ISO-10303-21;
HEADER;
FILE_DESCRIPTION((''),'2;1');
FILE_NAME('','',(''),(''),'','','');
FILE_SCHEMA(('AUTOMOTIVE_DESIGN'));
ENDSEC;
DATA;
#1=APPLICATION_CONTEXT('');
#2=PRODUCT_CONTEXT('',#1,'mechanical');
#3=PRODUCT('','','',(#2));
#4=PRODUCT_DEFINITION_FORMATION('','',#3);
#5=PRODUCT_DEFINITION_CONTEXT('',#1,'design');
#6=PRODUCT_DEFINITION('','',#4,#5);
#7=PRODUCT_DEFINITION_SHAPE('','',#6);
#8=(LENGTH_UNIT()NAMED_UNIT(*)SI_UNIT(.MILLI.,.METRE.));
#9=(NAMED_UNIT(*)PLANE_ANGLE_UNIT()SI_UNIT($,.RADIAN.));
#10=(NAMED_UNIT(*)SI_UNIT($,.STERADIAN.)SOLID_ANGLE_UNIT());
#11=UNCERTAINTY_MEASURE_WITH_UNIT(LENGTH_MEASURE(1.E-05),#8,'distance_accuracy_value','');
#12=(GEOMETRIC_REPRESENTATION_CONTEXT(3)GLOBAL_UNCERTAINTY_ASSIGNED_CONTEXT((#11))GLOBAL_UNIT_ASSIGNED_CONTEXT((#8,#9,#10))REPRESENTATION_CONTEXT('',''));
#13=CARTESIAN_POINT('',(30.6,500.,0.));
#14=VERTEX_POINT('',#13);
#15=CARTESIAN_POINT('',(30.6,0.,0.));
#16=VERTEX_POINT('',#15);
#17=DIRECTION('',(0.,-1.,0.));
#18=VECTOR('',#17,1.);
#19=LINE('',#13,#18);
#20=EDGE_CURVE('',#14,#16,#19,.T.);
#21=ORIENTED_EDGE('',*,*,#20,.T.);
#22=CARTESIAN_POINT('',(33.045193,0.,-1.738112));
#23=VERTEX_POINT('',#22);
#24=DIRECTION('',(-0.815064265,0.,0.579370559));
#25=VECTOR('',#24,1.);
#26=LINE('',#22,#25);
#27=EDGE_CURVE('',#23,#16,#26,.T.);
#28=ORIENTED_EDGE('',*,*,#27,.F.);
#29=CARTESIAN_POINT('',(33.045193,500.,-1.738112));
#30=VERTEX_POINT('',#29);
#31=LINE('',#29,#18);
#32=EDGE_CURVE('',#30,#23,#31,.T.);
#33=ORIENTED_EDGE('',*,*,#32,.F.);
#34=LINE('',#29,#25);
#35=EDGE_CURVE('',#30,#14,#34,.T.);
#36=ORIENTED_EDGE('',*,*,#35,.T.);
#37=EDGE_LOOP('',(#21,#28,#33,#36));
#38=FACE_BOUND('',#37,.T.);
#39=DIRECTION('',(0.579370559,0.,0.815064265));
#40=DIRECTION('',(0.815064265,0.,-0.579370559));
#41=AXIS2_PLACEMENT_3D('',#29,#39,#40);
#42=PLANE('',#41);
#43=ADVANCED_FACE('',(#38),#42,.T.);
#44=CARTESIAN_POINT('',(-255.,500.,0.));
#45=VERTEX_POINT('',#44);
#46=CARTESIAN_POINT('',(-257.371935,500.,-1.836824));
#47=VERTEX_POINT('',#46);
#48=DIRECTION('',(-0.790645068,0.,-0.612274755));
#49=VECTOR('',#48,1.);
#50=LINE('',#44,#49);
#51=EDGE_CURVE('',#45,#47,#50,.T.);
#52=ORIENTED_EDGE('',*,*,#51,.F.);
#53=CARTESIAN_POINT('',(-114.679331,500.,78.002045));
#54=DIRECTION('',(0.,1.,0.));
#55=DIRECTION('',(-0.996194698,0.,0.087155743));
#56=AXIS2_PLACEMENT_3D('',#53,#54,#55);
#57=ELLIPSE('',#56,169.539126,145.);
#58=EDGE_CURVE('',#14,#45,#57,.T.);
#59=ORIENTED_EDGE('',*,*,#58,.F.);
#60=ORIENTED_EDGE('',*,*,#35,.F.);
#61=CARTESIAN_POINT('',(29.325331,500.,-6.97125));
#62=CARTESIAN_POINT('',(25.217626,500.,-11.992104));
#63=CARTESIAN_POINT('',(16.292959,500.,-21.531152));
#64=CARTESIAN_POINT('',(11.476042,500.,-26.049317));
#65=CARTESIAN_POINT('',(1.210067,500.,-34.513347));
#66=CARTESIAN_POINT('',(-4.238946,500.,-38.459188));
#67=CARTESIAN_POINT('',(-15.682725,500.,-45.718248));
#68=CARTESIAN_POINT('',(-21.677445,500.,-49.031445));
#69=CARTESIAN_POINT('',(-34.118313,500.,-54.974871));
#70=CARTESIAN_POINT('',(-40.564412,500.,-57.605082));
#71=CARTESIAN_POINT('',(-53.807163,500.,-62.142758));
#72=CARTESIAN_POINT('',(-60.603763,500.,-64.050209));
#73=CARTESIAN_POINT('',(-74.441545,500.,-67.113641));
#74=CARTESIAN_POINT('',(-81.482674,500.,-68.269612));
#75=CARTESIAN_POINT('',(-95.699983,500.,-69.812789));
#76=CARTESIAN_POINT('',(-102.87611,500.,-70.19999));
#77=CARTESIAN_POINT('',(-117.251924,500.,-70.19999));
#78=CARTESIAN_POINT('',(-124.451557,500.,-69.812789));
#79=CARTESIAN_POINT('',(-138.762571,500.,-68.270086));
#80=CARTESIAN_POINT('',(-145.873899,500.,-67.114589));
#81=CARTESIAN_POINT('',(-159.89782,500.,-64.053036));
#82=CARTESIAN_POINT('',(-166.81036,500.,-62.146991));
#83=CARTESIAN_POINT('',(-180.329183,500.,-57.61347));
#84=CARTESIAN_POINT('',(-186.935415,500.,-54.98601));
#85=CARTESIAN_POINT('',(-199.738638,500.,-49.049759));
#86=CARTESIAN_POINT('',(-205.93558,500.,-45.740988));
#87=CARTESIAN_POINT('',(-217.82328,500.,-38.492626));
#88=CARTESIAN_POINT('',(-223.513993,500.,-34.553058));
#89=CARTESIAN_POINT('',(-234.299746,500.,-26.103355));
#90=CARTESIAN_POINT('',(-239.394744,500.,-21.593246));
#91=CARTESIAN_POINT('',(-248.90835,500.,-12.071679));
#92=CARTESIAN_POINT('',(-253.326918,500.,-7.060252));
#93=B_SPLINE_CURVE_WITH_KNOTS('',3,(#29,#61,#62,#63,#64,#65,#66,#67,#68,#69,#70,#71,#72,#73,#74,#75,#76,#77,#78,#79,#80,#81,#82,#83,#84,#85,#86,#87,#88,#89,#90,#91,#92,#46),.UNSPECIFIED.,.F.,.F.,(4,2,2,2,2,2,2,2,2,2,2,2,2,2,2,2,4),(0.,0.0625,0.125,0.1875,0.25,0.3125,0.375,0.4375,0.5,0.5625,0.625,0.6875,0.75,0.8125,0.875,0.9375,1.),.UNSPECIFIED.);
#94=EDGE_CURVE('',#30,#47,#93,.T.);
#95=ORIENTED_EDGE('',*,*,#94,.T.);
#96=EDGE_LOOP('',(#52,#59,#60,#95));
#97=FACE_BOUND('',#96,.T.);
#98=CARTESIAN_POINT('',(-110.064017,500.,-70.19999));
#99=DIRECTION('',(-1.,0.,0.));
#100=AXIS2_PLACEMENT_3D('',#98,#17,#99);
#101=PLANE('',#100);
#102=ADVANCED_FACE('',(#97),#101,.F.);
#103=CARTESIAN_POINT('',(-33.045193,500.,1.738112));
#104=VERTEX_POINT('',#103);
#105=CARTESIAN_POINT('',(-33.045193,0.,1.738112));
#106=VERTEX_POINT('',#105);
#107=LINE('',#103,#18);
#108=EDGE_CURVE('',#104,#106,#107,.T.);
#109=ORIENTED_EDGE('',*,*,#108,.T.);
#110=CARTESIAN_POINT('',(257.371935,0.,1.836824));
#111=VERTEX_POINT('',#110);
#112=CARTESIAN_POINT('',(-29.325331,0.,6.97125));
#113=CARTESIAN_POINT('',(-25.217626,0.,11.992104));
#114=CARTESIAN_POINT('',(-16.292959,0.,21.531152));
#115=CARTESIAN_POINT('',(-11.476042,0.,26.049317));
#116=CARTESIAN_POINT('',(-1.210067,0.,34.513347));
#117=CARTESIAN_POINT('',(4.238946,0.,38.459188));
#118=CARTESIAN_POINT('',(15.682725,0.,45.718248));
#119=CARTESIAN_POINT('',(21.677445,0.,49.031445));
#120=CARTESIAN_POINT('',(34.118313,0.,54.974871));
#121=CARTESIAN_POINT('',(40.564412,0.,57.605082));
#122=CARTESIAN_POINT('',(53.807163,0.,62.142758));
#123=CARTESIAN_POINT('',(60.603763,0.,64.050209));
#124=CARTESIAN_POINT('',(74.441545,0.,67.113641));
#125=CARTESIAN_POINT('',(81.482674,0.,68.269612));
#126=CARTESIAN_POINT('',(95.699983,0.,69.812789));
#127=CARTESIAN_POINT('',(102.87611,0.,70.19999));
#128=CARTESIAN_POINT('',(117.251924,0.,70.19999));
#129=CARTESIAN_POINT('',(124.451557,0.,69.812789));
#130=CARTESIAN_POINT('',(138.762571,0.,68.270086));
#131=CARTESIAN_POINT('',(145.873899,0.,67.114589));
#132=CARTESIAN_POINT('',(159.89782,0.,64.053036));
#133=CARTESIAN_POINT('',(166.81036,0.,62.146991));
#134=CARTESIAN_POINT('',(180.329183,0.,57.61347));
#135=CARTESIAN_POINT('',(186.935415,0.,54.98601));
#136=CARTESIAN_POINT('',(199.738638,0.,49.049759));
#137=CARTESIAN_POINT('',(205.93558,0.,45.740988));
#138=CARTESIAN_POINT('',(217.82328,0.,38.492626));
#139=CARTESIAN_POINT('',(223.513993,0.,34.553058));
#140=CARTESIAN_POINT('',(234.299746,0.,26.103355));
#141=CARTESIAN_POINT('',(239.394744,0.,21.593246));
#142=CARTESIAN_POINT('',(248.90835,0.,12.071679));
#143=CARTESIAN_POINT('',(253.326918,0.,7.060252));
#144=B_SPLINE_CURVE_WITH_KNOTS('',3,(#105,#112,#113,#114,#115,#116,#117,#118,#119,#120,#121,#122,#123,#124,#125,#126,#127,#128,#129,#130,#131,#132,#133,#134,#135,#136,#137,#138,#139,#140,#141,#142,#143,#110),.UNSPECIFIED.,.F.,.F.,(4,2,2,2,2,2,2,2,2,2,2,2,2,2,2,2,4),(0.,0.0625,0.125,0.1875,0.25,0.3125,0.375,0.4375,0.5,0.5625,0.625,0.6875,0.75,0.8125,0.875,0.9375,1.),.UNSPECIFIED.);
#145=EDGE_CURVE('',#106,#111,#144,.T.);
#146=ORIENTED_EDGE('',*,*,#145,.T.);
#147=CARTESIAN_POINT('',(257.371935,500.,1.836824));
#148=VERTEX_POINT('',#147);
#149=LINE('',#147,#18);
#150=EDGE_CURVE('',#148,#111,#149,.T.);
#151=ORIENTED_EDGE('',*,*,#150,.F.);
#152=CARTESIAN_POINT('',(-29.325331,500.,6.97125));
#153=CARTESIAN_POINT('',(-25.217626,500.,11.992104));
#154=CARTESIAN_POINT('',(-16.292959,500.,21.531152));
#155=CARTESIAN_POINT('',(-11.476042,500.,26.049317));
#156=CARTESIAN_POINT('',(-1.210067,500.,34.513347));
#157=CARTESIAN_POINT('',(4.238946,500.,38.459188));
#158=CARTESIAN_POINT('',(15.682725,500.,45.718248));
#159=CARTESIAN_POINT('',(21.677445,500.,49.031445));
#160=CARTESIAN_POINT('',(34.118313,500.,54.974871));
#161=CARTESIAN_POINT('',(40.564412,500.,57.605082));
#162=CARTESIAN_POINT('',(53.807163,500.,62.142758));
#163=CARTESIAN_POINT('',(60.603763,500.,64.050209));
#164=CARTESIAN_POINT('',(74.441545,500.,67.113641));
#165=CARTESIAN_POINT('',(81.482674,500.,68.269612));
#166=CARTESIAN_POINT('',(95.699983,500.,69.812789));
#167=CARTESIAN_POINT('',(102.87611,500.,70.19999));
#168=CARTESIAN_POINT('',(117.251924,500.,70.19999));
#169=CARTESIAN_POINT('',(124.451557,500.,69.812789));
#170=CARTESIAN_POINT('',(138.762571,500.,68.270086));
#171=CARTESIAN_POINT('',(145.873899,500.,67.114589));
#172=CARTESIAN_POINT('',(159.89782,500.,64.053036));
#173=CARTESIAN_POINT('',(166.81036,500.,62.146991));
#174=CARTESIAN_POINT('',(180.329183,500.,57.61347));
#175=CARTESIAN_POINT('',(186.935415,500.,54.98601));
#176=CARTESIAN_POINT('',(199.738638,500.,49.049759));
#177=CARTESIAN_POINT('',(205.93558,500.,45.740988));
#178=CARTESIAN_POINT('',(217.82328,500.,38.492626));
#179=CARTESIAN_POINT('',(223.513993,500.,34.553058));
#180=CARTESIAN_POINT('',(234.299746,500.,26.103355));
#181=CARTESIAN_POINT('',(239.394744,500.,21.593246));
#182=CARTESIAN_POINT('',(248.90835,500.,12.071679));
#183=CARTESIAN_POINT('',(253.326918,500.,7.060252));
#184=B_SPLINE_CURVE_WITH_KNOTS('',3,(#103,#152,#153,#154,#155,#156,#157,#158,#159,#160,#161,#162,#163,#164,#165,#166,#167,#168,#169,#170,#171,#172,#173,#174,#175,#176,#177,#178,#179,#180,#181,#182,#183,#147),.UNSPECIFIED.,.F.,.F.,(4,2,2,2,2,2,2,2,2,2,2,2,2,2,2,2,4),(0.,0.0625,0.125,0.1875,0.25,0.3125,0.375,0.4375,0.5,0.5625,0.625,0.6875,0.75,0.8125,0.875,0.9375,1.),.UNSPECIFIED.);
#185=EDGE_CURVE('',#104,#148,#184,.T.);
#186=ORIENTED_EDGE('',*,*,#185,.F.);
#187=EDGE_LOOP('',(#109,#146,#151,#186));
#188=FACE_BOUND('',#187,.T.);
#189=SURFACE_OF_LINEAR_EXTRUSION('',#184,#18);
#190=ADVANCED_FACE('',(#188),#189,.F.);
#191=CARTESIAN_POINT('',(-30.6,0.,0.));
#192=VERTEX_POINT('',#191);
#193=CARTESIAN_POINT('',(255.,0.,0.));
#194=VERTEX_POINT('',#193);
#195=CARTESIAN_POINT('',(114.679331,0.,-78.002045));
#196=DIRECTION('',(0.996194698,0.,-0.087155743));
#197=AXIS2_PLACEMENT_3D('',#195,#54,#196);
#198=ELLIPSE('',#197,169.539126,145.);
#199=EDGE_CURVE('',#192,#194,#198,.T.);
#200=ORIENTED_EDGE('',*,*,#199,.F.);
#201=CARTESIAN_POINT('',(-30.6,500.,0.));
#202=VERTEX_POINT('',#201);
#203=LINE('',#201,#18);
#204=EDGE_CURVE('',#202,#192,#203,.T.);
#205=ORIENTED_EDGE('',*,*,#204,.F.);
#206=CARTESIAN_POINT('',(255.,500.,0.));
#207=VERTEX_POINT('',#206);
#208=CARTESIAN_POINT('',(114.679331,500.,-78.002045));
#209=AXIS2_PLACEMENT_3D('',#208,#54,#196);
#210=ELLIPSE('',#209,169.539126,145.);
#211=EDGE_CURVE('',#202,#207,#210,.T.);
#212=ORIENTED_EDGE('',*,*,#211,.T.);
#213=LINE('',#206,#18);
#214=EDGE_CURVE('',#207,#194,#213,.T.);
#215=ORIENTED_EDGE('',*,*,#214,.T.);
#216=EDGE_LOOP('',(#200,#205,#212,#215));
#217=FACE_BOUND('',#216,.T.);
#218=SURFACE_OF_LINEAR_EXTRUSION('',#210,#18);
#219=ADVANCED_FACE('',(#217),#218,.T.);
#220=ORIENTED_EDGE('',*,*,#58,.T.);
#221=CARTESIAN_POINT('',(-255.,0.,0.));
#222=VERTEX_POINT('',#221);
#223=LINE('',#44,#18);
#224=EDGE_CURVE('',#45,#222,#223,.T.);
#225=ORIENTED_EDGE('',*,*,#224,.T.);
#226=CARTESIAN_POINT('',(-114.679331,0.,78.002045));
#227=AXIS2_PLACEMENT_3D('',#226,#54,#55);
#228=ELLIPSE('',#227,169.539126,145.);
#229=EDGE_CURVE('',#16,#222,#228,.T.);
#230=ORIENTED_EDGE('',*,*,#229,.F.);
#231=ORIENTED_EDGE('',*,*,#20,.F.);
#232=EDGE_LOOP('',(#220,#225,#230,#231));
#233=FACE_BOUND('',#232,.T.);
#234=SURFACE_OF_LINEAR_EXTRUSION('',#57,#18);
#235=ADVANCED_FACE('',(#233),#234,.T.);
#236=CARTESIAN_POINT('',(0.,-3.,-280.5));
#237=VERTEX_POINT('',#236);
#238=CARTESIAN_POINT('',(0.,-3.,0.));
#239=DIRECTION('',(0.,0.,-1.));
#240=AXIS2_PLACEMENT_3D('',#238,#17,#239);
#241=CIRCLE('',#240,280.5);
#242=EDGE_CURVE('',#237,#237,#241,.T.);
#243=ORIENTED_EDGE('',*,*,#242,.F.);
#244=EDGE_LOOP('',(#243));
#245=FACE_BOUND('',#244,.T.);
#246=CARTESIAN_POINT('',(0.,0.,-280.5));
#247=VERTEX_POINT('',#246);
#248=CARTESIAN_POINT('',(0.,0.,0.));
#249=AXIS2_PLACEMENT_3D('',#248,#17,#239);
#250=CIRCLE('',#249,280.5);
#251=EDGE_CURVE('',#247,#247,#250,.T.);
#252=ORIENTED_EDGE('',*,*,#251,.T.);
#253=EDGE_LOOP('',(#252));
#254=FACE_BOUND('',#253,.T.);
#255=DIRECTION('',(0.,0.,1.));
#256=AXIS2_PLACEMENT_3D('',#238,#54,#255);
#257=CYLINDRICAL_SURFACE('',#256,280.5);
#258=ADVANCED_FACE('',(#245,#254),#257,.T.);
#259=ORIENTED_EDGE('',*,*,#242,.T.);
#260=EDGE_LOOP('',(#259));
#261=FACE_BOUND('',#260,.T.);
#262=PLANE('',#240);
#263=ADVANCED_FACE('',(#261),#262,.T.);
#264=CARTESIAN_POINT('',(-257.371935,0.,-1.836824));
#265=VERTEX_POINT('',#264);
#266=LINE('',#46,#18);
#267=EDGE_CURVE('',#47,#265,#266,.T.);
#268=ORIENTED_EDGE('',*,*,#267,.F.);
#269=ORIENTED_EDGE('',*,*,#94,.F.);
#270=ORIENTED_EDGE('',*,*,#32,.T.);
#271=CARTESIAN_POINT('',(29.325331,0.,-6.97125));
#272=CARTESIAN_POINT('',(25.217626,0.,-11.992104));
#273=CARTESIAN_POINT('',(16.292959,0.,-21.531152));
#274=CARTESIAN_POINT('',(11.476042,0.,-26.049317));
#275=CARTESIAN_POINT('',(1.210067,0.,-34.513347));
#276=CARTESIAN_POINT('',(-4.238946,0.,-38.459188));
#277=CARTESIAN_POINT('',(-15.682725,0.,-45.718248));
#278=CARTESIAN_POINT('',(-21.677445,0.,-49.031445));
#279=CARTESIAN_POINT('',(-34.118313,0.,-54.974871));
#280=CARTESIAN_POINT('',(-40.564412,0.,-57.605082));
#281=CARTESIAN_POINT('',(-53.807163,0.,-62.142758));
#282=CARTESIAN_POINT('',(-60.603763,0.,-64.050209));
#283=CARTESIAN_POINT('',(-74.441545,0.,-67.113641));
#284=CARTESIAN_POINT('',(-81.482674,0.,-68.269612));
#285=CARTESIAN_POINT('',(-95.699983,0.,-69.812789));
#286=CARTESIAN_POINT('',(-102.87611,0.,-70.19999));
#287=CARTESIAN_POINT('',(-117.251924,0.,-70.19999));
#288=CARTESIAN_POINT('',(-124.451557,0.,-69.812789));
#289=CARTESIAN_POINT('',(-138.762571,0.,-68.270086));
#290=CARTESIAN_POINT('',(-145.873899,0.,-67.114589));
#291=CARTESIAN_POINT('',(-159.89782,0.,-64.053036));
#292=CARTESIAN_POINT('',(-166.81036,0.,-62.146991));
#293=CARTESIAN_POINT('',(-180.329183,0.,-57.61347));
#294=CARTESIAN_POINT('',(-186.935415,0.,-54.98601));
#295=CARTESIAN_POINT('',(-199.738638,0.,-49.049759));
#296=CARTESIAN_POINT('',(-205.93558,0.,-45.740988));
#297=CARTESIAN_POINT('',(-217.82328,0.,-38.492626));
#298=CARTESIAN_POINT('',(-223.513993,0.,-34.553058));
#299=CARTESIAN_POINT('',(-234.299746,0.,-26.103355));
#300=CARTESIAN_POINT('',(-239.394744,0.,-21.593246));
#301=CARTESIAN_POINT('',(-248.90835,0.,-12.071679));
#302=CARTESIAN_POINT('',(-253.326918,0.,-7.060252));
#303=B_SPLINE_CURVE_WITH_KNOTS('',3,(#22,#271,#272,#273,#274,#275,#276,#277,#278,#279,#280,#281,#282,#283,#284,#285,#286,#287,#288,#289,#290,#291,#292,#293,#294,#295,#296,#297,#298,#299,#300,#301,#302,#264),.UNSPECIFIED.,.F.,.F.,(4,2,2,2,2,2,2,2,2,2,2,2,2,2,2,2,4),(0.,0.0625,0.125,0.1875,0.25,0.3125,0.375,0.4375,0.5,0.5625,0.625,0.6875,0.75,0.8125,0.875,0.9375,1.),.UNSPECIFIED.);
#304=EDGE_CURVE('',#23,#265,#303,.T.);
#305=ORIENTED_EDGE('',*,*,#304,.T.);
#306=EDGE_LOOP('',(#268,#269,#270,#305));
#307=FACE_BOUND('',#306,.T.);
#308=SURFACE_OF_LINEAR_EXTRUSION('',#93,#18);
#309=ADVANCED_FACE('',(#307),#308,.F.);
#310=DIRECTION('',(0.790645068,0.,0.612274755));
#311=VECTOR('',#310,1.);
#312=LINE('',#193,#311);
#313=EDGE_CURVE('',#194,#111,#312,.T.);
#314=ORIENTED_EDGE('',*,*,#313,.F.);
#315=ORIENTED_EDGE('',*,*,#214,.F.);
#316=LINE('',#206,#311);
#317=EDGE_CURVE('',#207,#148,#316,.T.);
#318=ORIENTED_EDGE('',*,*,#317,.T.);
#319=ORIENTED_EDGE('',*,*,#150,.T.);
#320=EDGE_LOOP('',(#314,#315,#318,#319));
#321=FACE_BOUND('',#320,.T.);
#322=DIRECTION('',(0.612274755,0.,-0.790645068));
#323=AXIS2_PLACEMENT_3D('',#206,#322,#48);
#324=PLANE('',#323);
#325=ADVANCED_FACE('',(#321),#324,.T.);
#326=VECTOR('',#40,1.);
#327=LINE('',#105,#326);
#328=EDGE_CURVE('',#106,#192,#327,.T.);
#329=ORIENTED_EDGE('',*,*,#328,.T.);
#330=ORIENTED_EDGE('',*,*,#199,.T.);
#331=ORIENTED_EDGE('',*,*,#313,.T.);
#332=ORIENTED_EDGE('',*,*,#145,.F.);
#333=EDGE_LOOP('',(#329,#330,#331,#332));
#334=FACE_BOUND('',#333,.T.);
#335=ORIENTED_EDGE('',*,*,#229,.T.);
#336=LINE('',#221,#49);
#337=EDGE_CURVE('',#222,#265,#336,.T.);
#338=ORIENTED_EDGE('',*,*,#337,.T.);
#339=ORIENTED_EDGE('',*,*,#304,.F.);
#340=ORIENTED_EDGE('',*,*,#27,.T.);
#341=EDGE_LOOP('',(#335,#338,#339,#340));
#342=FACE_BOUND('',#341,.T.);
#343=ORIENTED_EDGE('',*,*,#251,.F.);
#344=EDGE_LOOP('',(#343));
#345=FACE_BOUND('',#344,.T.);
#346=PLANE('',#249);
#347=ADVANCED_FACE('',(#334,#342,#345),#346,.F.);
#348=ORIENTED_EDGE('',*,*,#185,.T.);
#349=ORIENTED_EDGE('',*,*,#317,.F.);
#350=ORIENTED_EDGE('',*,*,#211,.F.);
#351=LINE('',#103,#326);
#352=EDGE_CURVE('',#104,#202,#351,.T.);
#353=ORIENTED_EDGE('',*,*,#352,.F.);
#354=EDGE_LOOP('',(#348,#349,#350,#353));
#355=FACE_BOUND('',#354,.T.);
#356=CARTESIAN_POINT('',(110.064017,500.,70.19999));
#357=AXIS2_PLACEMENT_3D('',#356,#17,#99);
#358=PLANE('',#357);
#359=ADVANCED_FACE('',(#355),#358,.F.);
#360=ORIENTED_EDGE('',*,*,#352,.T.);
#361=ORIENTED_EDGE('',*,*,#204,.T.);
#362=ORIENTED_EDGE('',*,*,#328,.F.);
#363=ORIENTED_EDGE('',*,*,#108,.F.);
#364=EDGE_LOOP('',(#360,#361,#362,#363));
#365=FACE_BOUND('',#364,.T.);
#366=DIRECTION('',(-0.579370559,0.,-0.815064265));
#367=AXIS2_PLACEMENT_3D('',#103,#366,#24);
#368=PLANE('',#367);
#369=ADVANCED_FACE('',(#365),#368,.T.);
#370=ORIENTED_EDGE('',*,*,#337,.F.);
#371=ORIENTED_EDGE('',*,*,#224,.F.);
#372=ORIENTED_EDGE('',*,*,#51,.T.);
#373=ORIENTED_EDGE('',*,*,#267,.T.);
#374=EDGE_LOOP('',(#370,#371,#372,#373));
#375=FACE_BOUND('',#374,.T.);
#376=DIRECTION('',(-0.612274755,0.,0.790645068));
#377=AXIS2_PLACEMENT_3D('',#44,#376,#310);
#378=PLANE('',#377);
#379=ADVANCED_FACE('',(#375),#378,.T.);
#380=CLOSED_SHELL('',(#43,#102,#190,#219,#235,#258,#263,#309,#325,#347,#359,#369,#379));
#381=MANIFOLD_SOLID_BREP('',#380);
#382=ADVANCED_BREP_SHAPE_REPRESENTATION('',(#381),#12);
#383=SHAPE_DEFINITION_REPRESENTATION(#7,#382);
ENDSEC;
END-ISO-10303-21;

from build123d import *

# Parameters (mm, degrees)
EXTRUIR_L_MINA1_DEPTH      = 500
CROQUIS2_R                 = 280.5
SALIENTE_EXTRUIR8_DEPTH    = 3
S_LIDO_MOVER_COPIAR1_ANGLE = 90
S_LIDO_MOVER_COPIAR4_ANGLE = 30
S_LIDO_MOVER_COPIAR5_ANGLE = 60


# Read off the part's stored shape, not the designer's step: Extruir-Lámina1
with BuildPart() as part:
    # Extruir-Lámina1 outline → Extruir-Lámina1 (new body)
    with BuildSketch(Plane(origin=(0, 0, 0), x_dir=(1, 0, 0), z_dir=(0, 1, 0))):
        with BuildLine():
            Line((30.6, 0), (33.045192794, 1.738111676))
            add(Edge.make_bspline(
                [(33.045192794, 1.738111676), (29.325331418, 6.971249659), (25.217625759, 11.992104492), (16.292959006, 21.531152277), (11.476041906, 26.049316609), (1.210067227, 34.513346738), (-4.238946213, 38.459188481), (-15.682725139, 45.718247967), (-21.67744537, 49.03144478), (-34.118312716, 54.97487064), (-40.564412482, 57.605081709), (-53.807162636, 62.142757905), (-60.603763125, 64.050208568), (-74.441544914, 67.113640591), (-81.482673915, 68.269611786), (-95.699983428, 69.812788852), (-102.876109859, 70.199989547), (-117.251923935, 70.199989547), (-124.451556616, 69.812789113), (-138.762571325, 68.27008593), (-145.873898544, 67.114589032), (-159.897819572, 64.053035779), (-166.810359776, 62.146990717), (-180.329183361, 57.61346979), (-186.935415282, 54.986010224), (-199.738637725, 49.04975895), (-205.93557964, 45.740987864), (-217.823279809, 38.492625566), (-223.513992633, 34.553058481), (-234.299746056, 26.103355079), (-239.394744204, 21.593245666), (-248.908350293, 12.071679353), (-253.326918033, 7.060251904), (-257.371935205, 1.836824266)],
                knots=[0, 0, 0, 0, 0.0625, 0.0625, 0.125, 0.125, 0.1875, 0.1875, 0.25, 0.25, 0.3125, 0.3125, 0.375, 0.375, 0.4375, 0.4375, 0.5, 0.5, 0.5625, 0.5625, 0.625, 0.625, 0.6875, 0.6875, 0.75, 0.75, 0.8125, 0.8125, 0.875, 0.875, 0.9375, 0.9375, 1, 1, 1, 1], degree=3))
            Line((-257.371935205, 1.836824266), (-255, 0))
            add(Edge.make_bspline(
                [(30.6, 0), (-106.087850725, 192.293827945), (-255, 0)],
                knots=[3.606762326, 3.606762326, 3.606762326, 5.614135135, 5.614135135, 5.614135135], degree=2, weights=[1, 0.537196639, 1]))
        make_face()
        with BuildLine():
            Line((-30.6, 0), (-33.045192794, -1.738111676))
            add(Edge.make_bspline(
                [(-33.045192794, -1.738111676), (-29.325331418, -6.971249659), (-25.217625759, -11.992104492), (-16.292959006, -21.531152277), (-11.476041906, -26.049316609), (-1.210067227, -34.513346738), (4.238946213, -38.459188481), (15.682725139, -45.718247967), (21.67744537, -49.03144478), (34.118312716, -54.97487064), (40.564412482, -57.605081709), (53.807162636, -62.142757905), (60.603763125, -64.050208568), (74.441544914, -67.113640591), (81.482673915, -68.269611786), (95.699983428, -69.812788852), (102.876109859, -70.199989547), (117.251923935, -70.199989547), (124.451556616, -69.812789113), (138.762571325, -68.27008593), (145.873898544, -67.114589032), (159.897819572, -64.053035779), (166.810359776, -62.146990717), (180.329183361, -57.61346979), (186.935415282, -54.986010224), (199.738637725, -49.04975895), (205.93557964, -45.740987864), (217.823279809, -38.492625566), (223.513992633, -34.553058481), (234.299746056, -26.103355079), (239.394744204, -21.593245666), (248.908350293, -12.071679353), (253.326918033, -7.060251904), (257.371935205, -1.836824266)],
                knots=[0, 0, 0, 0, 0.0625, 0.0625, 0.125, 0.125, 0.1875, 0.1875, 0.25, 0.25, 0.3125, 0.3125, 0.375, 0.375, 0.4375, 0.4375, 0.5, 0.5, 0.5625, 0.5625, 0.625, 0.625, 0.6875, 0.6875, 0.75, 0.75, 0.8125, 0.8125, 0.875, 0.875, 0.9375, 0.9375, 1, 1, 1, 1], degree=3))
            Line((257.371935205, -1.836824266), (255, 0))
            add(Edge.make_bspline(
                [(-30.6, 0), (106.087850725, -192.293827945), (255, 0)],
                knots=[3.606762326, 3.606762326, 3.606762326, 5.614135135, 5.614135135, 5.614135135], degree=2, weights=[1, 0.537196639, 1]))
        make_face()
    extrude(amount=EXTRUIR_L_MINA1_DEPTH)

    # Croquis2 → Saliente-Extruir8 (add)
    with BuildSketch(Plane.XZ):
        with Locations(Location((0, 0, 0), (0, 0, 270))):
            Circle(CROQUIS2_R)
    extrude(amount=SALIENTE_EXTRUIR8_DEPTH)


with BuildPart() as part_1:
    # Sólido-Mover/Copiar1: moved
    add(part.part.rotate(Axis((0, 0, 0), (0, -1, 0)), S_LIDO_MOVER_COPIAR1_ANGLE))


with BuildPart() as part_2:
    # Sólido-Mover/Copiar4: moved
    add(part_1.part.rotate(Axis((0, 0, 0), (0, 1, 0)), S_LIDO_MOVER_COPIAR4_ANGLE))


with BuildPart() as part_3:
    # Sólido-Mover/Copiar5: moved
    add(part_2.part.rotate(Axis((0, 0, 0), (0, 1, 0)), S_LIDO_MOVER_COPIAR5_ANGLE))


solid = part_3.part
